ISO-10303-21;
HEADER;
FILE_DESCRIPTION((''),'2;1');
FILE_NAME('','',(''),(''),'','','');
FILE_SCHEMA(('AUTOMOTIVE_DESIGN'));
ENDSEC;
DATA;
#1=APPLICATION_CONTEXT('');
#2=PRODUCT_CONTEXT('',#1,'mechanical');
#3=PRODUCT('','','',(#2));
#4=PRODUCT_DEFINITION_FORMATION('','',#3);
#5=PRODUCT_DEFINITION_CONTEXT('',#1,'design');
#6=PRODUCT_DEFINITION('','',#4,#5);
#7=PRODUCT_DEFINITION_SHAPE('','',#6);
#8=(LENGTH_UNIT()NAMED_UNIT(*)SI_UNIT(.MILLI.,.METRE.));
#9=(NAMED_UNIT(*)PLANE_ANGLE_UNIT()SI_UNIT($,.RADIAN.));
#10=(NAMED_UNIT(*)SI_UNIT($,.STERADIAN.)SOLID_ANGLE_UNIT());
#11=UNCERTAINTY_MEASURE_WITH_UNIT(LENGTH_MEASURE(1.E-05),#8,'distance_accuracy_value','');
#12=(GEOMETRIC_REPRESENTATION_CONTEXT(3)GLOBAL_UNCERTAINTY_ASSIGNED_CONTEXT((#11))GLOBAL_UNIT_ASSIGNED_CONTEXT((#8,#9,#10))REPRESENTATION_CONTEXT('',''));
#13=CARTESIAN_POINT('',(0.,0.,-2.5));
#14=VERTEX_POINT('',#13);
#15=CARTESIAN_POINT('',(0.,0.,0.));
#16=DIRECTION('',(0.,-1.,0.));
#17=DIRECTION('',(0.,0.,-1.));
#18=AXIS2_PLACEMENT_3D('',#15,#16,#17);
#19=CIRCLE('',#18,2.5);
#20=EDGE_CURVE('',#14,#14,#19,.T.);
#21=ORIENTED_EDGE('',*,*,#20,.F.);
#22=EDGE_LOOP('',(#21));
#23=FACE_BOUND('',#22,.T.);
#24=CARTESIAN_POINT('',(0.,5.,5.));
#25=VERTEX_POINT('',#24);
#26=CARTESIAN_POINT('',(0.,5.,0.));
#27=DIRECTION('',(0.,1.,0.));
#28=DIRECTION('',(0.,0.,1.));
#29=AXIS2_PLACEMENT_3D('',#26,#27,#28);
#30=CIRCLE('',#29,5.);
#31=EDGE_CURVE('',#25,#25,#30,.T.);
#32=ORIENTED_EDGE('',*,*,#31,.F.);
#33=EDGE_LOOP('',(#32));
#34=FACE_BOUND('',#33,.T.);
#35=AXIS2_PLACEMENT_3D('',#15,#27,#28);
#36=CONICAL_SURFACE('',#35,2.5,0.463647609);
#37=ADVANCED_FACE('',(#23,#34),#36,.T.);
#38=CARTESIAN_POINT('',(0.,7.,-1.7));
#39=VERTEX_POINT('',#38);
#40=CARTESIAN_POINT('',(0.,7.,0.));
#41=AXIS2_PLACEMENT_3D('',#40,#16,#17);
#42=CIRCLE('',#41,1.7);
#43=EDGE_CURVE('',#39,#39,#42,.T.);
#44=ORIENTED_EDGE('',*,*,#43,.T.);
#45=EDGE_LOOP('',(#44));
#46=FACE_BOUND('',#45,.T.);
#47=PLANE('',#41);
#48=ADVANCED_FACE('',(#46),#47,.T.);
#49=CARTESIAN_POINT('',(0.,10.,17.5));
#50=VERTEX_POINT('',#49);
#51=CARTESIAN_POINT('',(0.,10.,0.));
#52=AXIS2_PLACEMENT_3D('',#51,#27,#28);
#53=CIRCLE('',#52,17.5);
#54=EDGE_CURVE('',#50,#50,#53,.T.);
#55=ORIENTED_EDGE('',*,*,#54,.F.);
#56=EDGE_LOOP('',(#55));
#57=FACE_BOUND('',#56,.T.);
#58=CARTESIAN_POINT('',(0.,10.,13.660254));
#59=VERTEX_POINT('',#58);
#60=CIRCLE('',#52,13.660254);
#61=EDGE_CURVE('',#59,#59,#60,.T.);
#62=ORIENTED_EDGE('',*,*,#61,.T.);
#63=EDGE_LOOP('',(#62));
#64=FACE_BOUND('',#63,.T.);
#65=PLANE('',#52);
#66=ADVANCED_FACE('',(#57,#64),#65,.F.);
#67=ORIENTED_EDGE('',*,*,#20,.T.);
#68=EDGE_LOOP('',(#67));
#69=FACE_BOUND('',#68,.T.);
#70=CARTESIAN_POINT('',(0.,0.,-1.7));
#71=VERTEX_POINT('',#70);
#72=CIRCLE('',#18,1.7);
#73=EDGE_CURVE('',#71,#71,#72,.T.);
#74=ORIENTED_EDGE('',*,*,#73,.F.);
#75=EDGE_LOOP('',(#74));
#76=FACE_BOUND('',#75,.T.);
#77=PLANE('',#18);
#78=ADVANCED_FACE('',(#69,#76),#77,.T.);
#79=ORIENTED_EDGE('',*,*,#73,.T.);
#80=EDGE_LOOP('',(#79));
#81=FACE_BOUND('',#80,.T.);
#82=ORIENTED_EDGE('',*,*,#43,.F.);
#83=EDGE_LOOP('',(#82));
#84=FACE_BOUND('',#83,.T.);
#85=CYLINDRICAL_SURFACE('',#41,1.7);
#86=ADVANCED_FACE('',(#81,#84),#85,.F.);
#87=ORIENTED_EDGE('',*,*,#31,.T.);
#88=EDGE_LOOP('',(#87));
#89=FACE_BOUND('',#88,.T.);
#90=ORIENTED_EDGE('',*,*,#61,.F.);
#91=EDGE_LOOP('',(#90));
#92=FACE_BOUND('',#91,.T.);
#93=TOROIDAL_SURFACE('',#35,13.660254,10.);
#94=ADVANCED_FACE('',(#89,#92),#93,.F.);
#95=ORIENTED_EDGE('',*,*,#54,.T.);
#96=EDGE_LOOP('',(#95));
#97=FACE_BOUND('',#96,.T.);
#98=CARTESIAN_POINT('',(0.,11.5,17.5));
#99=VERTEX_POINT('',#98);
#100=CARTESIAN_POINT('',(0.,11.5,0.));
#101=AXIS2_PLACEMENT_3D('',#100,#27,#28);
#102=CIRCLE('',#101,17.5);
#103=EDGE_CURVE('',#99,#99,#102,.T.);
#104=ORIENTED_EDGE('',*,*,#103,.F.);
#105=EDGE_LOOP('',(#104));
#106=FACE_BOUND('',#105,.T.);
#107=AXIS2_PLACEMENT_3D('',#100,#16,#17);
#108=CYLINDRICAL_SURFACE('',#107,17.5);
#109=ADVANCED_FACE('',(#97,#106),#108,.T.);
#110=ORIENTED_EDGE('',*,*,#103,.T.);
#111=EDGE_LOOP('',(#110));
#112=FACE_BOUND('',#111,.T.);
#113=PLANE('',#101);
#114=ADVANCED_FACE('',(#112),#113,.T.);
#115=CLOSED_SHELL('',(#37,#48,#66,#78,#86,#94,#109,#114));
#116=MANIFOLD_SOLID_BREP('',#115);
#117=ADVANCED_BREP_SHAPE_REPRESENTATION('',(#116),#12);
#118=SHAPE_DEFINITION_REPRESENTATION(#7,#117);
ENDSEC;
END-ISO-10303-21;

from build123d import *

# Parameters (mm, degrees)
SKETCH5_R           = 5
BOSS_EXTRUDE2_DEPTH = 5
SKETCH6_R           = 17.5
BOSS_EXTRUDE3_DEPTH = 1.5
SKETCH7_R           = 1.7
CUT_EXTRUDE1_DEPTH  = 7
FILLET1_R           = 10


with BuildPart() as part:
    # Sketch3 → Revolve1 (revolve)
    with BuildSketch(Plane.XY, mode=Mode.PRIVATE) as revolve1_sk:
        Polygon((0, 0), (2.5, 0), (5, 5), (0, 5), align=None)
    revolve(revolve1_sk.sketch.rotate(Axis((0, 0, 0), (0, 1, 0)), 90), axis=Axis((0, 0, 0), (0, 1, 0)))

    # Sketch5 → Boss-Extrude2 (add)
    with BuildSketch(Plane(origin=(0, 5, 0), x_dir=(1, 0, 0), z_dir=(0, 1, 0))):
        with Locations(Location((0, 0, 0), (0, 0, 270))):
            Circle(SKETCH5_R)
    extrude(amount=BOSS_EXTRUDE2_DEPTH)

    # Sketch6 → Boss-Extrude3 (add)
    with BuildSketch(Plane(origin=(0, 10, 0), x_dir=(1, 0, 0), z_dir=(0, 1, 0))):
        with Locations(Location((0, 0, 0), (0, 0, 270))):
            Circle(SKETCH6_R)
    extrude(amount=BOSS_EXTRUDE3_DEPTH)

    # Sketch7 → Cut-Extrude1 (cut)
    with BuildSketch(Plane.XZ):
        with Locations(Location((0, 0, 0), (0, 0, 270))):
            Circle(SKETCH7_R)
    extrude(amount=-CUT_EXTRUDE1_DEPTH, mode=Mode.SUBTRACT)

    # Fillet1
    # the kernel refuses this fillet: 10 mm, written as the material it adds along each edge
    with BuildSketch(Plane(origin=(0, 10, 0), x_dir=(0, 0, 1), z_dir=(-1, 0, 0))) as fillet1_piece_1:
        with BuildLine():
            CenterArc((13.660254038, -10), FILLET1_R, 90, 60)
            Line((5, -5), (4.826794919, -4.9))
            ThreePointArc((4.826794919, -4.9), (4.8, -2.5), (4.8, 0))
            Line((4.8, 0), (5, 0.2))
            Line((5, 0.2), (13.660254038, 0.2))
            Line((13.660254038, 0.2), (13.660254038, 0))
        make_face()
    revolve(axis=Axis((0, 10, 0), (0, 1, 0)))


solid = part.part
